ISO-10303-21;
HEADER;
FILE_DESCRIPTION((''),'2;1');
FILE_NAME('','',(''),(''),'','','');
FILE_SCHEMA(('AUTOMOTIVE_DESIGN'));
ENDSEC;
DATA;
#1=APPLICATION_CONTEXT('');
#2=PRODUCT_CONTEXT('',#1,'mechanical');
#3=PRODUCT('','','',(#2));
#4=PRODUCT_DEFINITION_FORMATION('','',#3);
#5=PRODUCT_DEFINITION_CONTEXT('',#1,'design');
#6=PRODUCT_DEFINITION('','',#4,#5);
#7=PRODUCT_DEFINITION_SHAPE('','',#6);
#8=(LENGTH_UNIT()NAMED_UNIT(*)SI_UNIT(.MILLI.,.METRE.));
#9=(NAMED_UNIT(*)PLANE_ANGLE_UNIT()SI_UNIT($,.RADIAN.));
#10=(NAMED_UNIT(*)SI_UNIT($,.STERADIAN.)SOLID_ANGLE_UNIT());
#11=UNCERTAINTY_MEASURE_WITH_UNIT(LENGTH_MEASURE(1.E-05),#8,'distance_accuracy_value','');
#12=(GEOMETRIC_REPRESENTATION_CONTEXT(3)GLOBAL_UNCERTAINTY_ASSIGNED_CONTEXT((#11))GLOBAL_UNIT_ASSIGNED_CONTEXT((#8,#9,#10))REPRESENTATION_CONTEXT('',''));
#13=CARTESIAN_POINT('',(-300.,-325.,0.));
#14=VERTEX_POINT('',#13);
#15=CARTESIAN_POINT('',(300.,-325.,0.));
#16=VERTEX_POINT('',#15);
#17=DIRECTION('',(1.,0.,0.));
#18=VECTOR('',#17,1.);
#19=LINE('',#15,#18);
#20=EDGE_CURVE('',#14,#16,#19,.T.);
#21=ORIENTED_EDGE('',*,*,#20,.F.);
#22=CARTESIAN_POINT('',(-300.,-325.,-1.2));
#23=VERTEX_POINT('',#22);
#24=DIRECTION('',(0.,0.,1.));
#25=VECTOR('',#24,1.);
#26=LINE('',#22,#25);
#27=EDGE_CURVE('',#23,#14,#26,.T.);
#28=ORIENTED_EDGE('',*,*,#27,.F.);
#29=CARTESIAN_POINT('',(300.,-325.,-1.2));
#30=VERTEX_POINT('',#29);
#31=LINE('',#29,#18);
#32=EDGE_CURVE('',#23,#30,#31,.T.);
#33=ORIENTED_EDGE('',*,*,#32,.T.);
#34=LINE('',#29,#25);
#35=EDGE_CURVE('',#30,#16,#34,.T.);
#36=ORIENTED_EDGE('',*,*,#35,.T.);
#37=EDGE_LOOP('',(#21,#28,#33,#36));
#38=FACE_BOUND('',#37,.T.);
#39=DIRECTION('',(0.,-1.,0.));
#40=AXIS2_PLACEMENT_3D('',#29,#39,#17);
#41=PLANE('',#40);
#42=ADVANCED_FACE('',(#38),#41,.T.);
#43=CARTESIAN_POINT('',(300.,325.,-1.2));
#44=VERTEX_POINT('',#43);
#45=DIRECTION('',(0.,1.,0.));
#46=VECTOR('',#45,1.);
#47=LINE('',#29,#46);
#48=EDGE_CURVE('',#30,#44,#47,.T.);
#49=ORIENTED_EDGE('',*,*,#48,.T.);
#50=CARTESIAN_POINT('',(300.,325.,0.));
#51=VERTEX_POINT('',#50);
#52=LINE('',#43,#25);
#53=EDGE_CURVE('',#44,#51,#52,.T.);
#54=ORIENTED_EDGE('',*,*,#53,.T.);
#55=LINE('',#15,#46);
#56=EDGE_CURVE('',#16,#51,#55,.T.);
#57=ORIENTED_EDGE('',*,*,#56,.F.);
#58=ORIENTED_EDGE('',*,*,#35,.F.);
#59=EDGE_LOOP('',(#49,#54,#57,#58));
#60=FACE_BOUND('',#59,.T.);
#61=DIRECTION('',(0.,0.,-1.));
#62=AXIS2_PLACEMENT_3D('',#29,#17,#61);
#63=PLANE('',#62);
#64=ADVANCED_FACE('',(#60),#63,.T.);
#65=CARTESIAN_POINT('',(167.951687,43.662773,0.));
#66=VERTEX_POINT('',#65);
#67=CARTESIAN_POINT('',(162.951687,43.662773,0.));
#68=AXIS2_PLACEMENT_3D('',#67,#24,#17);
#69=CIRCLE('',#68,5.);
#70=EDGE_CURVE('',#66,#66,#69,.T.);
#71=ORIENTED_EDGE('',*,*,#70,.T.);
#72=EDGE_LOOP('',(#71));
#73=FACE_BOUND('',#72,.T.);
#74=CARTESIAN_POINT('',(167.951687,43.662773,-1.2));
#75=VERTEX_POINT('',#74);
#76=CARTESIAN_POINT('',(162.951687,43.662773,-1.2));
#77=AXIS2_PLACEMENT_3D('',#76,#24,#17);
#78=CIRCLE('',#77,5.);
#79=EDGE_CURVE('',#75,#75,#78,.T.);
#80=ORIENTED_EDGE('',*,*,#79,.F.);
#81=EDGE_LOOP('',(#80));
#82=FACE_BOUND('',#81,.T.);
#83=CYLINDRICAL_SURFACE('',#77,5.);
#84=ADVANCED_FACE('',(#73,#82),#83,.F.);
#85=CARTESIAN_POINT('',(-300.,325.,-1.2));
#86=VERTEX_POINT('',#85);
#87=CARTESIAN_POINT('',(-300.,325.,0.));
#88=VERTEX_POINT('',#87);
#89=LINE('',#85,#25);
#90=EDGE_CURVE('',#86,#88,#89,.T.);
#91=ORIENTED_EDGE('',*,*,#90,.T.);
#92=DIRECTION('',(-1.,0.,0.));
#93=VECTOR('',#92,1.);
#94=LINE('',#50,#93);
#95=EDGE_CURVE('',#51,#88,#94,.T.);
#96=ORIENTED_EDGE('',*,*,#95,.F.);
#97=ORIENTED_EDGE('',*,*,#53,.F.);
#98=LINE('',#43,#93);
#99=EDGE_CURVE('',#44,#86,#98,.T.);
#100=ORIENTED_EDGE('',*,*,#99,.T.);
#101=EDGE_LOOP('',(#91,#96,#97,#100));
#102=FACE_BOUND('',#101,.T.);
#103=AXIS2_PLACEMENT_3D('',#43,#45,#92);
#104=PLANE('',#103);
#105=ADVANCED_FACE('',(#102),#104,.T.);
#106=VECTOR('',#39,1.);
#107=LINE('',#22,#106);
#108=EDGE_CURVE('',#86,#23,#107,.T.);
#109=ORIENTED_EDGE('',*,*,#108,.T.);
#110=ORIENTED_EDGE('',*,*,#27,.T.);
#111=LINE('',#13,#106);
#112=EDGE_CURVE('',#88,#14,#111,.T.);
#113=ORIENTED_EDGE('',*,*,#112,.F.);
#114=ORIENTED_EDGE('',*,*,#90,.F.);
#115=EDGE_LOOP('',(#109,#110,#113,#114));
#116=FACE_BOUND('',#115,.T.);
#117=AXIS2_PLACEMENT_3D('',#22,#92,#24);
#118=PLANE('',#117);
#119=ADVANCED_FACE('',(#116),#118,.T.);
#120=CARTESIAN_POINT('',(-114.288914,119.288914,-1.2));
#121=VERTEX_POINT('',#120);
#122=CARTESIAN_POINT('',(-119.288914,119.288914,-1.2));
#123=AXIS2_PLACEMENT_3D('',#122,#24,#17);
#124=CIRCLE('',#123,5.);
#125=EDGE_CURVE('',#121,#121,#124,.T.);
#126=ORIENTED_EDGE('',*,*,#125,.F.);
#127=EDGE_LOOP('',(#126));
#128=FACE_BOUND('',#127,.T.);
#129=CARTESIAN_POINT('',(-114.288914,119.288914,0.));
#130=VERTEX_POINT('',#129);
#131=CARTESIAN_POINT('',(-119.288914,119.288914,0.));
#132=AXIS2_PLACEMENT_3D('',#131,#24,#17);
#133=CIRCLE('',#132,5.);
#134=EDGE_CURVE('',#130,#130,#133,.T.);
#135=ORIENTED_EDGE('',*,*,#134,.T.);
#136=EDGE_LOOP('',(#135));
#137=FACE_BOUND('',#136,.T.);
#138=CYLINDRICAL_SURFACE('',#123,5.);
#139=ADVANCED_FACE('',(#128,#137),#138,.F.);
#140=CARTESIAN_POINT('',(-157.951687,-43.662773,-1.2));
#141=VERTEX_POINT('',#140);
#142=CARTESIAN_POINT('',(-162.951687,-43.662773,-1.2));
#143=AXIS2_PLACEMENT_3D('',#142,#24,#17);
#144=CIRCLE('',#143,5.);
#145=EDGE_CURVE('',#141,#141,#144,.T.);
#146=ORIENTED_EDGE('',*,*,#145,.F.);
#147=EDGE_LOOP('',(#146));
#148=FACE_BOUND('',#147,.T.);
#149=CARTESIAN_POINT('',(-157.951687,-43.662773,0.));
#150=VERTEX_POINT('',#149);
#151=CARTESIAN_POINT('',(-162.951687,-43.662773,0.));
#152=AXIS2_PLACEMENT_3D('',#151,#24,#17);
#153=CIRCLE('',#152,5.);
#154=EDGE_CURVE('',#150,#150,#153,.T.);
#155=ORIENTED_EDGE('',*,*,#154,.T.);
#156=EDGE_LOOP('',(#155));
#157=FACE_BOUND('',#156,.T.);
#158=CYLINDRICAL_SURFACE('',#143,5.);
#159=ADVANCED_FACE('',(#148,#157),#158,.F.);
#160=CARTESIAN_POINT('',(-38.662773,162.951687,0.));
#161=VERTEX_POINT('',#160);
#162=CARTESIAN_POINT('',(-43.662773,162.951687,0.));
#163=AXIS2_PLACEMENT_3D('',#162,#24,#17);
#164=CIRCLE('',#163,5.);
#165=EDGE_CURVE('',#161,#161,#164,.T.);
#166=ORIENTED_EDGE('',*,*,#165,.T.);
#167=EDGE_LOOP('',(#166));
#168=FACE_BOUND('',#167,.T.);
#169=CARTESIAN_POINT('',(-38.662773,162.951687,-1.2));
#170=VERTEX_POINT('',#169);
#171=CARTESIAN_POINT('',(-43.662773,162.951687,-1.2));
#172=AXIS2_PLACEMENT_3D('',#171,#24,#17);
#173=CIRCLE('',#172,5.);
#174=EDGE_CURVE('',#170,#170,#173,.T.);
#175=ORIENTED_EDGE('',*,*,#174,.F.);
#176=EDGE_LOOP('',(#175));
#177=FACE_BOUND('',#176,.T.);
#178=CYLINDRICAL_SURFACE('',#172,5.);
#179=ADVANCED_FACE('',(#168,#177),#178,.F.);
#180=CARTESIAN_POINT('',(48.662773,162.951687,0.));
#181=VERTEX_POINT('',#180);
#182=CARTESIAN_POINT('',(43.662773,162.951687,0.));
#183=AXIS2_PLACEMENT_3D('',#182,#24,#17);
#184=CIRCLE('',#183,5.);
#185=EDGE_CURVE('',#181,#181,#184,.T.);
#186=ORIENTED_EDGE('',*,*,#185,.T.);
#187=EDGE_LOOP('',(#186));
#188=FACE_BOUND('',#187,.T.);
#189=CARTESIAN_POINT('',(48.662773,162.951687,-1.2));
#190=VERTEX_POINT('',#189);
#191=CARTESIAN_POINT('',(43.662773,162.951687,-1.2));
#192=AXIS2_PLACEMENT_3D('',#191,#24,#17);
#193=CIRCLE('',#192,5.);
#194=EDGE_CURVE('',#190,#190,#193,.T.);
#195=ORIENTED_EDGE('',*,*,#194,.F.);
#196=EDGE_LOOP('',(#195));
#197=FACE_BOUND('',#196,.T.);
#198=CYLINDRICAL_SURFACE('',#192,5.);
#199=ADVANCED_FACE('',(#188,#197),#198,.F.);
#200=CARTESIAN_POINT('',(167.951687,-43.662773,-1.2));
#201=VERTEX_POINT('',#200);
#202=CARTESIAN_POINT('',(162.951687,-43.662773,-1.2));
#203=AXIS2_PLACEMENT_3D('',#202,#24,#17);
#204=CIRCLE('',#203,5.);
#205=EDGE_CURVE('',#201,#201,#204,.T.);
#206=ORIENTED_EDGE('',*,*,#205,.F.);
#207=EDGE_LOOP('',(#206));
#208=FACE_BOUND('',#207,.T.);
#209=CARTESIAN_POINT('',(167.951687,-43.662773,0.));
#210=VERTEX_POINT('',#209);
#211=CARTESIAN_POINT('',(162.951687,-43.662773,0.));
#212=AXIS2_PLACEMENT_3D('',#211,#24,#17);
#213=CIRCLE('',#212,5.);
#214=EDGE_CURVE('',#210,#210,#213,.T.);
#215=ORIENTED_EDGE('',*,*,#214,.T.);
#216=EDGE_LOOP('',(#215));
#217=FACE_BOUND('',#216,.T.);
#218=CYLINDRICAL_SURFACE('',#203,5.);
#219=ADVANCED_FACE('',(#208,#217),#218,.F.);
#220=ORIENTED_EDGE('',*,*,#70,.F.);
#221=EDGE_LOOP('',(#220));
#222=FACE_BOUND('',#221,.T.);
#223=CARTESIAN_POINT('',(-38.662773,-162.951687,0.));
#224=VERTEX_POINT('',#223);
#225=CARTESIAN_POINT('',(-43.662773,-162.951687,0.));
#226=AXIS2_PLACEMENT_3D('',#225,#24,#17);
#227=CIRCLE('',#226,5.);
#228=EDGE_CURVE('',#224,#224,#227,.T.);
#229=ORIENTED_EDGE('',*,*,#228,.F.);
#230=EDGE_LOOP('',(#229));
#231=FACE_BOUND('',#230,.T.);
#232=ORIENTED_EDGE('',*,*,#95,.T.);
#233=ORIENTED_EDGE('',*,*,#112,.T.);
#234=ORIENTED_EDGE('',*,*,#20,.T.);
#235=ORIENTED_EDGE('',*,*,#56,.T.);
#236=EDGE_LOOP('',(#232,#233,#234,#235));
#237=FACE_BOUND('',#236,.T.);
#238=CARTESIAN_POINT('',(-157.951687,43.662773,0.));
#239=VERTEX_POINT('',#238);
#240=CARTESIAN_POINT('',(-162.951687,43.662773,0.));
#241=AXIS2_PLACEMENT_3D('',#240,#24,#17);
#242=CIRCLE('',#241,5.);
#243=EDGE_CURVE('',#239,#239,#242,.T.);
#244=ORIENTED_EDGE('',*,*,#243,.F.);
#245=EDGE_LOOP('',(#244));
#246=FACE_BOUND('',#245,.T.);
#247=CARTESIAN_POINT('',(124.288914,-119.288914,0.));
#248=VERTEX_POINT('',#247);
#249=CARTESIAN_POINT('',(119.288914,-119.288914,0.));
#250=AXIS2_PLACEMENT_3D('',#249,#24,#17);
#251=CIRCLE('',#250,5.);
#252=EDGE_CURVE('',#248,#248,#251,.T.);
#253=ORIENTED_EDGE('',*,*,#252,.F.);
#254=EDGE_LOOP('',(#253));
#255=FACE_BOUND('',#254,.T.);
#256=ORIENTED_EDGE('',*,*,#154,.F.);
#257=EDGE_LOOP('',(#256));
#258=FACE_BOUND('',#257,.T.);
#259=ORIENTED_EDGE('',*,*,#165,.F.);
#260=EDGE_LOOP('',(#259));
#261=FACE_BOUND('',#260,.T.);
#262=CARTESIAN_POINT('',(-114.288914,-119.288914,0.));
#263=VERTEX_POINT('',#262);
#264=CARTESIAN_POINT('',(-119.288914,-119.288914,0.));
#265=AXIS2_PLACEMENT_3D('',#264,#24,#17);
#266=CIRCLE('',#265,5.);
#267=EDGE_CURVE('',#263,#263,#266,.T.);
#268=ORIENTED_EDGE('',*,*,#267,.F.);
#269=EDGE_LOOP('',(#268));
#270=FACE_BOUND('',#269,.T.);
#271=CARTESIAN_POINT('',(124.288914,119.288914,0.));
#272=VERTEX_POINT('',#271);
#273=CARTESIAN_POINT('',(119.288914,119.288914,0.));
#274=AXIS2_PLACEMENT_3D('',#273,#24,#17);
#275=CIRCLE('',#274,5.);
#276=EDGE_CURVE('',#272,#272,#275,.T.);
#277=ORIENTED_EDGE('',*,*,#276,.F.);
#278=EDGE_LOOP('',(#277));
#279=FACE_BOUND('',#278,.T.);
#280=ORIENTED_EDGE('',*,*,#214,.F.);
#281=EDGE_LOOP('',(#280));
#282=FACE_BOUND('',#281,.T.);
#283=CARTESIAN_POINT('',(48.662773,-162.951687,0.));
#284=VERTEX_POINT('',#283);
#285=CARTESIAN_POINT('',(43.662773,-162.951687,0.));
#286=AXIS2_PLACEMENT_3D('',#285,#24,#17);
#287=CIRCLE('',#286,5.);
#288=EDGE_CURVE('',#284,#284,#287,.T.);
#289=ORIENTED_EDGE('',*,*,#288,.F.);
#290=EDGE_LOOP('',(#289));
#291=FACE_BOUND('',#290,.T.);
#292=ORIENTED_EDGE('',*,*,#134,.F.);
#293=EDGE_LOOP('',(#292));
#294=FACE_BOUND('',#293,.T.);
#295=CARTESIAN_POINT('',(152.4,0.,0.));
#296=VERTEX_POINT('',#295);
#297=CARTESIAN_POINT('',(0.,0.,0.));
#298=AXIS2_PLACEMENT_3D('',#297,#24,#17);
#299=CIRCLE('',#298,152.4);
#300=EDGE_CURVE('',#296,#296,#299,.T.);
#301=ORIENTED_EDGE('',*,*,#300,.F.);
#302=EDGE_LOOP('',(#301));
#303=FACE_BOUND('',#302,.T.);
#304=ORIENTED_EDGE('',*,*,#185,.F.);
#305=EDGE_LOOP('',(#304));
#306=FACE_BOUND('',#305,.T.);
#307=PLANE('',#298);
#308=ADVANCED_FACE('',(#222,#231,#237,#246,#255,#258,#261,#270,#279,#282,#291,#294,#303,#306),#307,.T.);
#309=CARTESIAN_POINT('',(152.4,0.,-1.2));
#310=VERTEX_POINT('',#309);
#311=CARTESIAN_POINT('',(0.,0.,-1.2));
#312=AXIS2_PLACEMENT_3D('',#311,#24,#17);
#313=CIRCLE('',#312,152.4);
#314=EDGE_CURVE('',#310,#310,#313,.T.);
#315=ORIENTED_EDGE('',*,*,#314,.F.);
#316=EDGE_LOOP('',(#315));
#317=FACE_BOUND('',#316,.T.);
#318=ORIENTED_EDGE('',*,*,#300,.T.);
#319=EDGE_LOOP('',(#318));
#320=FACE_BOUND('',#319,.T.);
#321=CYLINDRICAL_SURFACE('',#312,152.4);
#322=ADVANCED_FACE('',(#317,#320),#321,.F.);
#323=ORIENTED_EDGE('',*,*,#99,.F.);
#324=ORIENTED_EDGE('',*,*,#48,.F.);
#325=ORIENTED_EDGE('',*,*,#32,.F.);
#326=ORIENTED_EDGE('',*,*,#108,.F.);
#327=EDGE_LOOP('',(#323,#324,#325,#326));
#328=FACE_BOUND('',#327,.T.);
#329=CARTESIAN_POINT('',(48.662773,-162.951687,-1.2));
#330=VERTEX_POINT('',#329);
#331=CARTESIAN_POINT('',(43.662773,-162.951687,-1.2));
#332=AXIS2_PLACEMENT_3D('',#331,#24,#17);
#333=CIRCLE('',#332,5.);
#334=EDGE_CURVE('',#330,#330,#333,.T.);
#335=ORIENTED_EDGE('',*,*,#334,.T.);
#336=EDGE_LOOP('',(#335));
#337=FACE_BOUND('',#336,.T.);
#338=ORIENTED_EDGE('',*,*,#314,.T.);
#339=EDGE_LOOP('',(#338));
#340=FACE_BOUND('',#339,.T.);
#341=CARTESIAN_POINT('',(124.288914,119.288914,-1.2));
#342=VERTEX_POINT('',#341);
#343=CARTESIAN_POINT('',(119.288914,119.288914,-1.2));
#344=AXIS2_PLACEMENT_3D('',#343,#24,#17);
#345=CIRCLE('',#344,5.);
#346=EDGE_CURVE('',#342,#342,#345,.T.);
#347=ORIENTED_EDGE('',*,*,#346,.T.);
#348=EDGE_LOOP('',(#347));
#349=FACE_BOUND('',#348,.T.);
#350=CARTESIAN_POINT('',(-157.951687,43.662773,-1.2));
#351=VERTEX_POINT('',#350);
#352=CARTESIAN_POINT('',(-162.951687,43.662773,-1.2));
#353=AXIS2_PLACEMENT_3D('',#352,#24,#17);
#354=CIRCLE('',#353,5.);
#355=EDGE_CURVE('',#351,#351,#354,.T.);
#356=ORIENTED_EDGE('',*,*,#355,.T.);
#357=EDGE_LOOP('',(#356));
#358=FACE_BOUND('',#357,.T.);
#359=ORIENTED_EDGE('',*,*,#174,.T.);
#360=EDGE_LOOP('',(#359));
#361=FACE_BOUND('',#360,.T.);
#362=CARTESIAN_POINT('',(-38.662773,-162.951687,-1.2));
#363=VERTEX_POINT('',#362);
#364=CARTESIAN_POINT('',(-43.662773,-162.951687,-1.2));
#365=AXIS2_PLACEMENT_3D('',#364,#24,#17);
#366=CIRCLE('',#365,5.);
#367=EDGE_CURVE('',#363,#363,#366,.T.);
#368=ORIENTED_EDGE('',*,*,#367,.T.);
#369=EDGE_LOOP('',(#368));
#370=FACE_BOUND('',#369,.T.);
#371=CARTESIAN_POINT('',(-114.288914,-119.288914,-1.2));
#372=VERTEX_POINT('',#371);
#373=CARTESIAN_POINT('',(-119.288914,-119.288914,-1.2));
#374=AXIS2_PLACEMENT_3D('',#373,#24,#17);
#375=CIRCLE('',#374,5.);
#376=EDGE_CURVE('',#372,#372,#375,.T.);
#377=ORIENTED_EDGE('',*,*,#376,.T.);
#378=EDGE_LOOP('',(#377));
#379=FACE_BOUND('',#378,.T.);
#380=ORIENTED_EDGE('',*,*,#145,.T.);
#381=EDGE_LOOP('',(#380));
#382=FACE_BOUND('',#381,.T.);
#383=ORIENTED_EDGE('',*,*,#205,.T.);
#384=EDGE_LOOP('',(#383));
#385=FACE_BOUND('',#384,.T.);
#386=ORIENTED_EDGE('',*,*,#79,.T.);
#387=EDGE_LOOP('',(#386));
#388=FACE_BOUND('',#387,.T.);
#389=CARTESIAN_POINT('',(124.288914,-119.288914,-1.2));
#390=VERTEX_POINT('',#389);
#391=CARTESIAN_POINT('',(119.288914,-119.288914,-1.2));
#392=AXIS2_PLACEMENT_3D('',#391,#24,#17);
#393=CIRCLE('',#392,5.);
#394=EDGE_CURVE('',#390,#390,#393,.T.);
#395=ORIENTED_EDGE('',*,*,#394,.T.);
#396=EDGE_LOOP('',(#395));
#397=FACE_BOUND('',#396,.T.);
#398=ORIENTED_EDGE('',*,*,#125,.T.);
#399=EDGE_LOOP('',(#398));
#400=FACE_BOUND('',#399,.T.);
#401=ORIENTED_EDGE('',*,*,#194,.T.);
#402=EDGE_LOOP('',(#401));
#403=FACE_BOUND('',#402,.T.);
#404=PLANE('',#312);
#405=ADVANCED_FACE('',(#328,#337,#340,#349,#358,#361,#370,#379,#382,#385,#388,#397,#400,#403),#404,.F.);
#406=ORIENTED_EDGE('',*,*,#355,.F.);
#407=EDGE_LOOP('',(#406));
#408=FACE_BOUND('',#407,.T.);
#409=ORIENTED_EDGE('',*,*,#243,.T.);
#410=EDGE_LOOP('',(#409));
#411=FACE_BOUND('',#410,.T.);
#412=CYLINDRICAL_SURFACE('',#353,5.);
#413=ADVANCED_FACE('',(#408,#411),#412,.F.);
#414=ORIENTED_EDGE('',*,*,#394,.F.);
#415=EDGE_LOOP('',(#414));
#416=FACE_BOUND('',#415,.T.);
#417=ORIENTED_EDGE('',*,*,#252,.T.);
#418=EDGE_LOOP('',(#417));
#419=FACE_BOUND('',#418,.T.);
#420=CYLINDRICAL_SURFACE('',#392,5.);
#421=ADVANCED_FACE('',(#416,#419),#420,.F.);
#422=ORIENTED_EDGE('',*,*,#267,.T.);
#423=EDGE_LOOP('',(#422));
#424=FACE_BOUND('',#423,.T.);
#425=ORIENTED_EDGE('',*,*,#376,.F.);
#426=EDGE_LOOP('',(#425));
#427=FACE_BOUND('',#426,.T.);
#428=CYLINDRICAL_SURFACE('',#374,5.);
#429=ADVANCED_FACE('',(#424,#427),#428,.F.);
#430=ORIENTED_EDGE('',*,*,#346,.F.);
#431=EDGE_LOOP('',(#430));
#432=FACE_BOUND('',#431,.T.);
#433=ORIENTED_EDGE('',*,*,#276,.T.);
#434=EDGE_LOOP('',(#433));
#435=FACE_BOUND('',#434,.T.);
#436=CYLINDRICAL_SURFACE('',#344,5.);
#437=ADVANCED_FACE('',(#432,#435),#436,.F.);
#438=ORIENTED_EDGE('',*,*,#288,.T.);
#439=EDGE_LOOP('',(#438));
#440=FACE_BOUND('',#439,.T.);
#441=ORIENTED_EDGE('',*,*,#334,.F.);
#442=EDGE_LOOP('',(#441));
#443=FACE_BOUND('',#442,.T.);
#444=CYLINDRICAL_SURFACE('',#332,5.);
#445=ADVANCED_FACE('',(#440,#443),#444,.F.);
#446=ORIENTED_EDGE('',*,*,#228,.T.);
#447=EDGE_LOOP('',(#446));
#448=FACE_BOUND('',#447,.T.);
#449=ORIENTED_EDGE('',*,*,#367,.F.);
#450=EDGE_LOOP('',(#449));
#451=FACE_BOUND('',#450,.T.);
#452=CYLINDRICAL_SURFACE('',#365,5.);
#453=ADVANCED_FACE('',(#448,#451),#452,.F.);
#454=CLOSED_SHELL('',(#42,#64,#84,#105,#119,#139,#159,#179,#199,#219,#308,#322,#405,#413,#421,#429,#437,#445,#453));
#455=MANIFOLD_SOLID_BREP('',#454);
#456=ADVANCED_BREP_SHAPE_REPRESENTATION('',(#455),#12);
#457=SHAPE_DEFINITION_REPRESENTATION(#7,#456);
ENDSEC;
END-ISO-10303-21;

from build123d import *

# Parameters (mm, degrees)
SKETCH1_W          = 600
SKETCH1_H          = 650
SKETCH1_R          = 152.4
SKETCH1_R_2        = 5
BASE_FLANGE1_DEPTH = 1.2


# Sheet-metal steps are written as plain solids
with BuildPart() as part:
    # Sketch1 → Base-Flange1 (new body)
    with BuildSketch(Plane.XY):
        Rectangle(SKETCH1_W, SKETCH1_H)
        Circle(SKETCH1_R, mode=Mode.SUBTRACT)
        with Locations((43.662772909, 162.951686895)):
            Circle(SKETCH1_R_2, mode=Mode.SUBTRACT)
        with Locations((119.288913986, 119.288913986)):
            Circle(SKETCH1_R_2, mode=Mode.SUBTRACT)
        with Locations((162.951686895, 43.662772909)):
            Circle(SKETCH1_R_2, mode=Mode.SUBTRACT)
        with Locations((162.951686895, -43.662772909)):
            Circle(SKETCH1_R_2, mode=Mode.SUBTRACT)
        with Locations((119.288913986, -119.288913986)):
            Circle(SKETCH1_R_2, mode=Mode.SUBTRACT)
        with Locations((43.662772909, -162.951686895)):
            Circle(SKETCH1_R_2, mode=Mode.SUBTRACT)
        with Locations((-43.662772909, -162.951686895)):
            Circle(SKETCH1_R_2, mode=Mode.SUBTRACT)
        with Locations((-119.288913986, -119.288913986)):
            Circle(SKETCH1_R_2, mode=Mode.SUBTRACT)
        with Locations((-162.951686895, -43.662772909)):
            Circle(SKETCH1_R_2, mode=Mode.SUBTRACT)
        with Locations((-162.951686895, 43.662772909)):
            Circle(SKETCH1_R_2, mode=Mode.SUBTRACT)
        with Locations((-119.288913986, 119.288913986)):
            Circle(SKETCH1_R_2, mode=Mode.SUBTRACT)
        with Locations((-43.662772909, 162.951686895)):
            Circle(SKETCH1_R_2, mode=Mode.SUBTRACT)
    extrude(amount=-BASE_FLANGE1_DEPTH)


solid = part.part
